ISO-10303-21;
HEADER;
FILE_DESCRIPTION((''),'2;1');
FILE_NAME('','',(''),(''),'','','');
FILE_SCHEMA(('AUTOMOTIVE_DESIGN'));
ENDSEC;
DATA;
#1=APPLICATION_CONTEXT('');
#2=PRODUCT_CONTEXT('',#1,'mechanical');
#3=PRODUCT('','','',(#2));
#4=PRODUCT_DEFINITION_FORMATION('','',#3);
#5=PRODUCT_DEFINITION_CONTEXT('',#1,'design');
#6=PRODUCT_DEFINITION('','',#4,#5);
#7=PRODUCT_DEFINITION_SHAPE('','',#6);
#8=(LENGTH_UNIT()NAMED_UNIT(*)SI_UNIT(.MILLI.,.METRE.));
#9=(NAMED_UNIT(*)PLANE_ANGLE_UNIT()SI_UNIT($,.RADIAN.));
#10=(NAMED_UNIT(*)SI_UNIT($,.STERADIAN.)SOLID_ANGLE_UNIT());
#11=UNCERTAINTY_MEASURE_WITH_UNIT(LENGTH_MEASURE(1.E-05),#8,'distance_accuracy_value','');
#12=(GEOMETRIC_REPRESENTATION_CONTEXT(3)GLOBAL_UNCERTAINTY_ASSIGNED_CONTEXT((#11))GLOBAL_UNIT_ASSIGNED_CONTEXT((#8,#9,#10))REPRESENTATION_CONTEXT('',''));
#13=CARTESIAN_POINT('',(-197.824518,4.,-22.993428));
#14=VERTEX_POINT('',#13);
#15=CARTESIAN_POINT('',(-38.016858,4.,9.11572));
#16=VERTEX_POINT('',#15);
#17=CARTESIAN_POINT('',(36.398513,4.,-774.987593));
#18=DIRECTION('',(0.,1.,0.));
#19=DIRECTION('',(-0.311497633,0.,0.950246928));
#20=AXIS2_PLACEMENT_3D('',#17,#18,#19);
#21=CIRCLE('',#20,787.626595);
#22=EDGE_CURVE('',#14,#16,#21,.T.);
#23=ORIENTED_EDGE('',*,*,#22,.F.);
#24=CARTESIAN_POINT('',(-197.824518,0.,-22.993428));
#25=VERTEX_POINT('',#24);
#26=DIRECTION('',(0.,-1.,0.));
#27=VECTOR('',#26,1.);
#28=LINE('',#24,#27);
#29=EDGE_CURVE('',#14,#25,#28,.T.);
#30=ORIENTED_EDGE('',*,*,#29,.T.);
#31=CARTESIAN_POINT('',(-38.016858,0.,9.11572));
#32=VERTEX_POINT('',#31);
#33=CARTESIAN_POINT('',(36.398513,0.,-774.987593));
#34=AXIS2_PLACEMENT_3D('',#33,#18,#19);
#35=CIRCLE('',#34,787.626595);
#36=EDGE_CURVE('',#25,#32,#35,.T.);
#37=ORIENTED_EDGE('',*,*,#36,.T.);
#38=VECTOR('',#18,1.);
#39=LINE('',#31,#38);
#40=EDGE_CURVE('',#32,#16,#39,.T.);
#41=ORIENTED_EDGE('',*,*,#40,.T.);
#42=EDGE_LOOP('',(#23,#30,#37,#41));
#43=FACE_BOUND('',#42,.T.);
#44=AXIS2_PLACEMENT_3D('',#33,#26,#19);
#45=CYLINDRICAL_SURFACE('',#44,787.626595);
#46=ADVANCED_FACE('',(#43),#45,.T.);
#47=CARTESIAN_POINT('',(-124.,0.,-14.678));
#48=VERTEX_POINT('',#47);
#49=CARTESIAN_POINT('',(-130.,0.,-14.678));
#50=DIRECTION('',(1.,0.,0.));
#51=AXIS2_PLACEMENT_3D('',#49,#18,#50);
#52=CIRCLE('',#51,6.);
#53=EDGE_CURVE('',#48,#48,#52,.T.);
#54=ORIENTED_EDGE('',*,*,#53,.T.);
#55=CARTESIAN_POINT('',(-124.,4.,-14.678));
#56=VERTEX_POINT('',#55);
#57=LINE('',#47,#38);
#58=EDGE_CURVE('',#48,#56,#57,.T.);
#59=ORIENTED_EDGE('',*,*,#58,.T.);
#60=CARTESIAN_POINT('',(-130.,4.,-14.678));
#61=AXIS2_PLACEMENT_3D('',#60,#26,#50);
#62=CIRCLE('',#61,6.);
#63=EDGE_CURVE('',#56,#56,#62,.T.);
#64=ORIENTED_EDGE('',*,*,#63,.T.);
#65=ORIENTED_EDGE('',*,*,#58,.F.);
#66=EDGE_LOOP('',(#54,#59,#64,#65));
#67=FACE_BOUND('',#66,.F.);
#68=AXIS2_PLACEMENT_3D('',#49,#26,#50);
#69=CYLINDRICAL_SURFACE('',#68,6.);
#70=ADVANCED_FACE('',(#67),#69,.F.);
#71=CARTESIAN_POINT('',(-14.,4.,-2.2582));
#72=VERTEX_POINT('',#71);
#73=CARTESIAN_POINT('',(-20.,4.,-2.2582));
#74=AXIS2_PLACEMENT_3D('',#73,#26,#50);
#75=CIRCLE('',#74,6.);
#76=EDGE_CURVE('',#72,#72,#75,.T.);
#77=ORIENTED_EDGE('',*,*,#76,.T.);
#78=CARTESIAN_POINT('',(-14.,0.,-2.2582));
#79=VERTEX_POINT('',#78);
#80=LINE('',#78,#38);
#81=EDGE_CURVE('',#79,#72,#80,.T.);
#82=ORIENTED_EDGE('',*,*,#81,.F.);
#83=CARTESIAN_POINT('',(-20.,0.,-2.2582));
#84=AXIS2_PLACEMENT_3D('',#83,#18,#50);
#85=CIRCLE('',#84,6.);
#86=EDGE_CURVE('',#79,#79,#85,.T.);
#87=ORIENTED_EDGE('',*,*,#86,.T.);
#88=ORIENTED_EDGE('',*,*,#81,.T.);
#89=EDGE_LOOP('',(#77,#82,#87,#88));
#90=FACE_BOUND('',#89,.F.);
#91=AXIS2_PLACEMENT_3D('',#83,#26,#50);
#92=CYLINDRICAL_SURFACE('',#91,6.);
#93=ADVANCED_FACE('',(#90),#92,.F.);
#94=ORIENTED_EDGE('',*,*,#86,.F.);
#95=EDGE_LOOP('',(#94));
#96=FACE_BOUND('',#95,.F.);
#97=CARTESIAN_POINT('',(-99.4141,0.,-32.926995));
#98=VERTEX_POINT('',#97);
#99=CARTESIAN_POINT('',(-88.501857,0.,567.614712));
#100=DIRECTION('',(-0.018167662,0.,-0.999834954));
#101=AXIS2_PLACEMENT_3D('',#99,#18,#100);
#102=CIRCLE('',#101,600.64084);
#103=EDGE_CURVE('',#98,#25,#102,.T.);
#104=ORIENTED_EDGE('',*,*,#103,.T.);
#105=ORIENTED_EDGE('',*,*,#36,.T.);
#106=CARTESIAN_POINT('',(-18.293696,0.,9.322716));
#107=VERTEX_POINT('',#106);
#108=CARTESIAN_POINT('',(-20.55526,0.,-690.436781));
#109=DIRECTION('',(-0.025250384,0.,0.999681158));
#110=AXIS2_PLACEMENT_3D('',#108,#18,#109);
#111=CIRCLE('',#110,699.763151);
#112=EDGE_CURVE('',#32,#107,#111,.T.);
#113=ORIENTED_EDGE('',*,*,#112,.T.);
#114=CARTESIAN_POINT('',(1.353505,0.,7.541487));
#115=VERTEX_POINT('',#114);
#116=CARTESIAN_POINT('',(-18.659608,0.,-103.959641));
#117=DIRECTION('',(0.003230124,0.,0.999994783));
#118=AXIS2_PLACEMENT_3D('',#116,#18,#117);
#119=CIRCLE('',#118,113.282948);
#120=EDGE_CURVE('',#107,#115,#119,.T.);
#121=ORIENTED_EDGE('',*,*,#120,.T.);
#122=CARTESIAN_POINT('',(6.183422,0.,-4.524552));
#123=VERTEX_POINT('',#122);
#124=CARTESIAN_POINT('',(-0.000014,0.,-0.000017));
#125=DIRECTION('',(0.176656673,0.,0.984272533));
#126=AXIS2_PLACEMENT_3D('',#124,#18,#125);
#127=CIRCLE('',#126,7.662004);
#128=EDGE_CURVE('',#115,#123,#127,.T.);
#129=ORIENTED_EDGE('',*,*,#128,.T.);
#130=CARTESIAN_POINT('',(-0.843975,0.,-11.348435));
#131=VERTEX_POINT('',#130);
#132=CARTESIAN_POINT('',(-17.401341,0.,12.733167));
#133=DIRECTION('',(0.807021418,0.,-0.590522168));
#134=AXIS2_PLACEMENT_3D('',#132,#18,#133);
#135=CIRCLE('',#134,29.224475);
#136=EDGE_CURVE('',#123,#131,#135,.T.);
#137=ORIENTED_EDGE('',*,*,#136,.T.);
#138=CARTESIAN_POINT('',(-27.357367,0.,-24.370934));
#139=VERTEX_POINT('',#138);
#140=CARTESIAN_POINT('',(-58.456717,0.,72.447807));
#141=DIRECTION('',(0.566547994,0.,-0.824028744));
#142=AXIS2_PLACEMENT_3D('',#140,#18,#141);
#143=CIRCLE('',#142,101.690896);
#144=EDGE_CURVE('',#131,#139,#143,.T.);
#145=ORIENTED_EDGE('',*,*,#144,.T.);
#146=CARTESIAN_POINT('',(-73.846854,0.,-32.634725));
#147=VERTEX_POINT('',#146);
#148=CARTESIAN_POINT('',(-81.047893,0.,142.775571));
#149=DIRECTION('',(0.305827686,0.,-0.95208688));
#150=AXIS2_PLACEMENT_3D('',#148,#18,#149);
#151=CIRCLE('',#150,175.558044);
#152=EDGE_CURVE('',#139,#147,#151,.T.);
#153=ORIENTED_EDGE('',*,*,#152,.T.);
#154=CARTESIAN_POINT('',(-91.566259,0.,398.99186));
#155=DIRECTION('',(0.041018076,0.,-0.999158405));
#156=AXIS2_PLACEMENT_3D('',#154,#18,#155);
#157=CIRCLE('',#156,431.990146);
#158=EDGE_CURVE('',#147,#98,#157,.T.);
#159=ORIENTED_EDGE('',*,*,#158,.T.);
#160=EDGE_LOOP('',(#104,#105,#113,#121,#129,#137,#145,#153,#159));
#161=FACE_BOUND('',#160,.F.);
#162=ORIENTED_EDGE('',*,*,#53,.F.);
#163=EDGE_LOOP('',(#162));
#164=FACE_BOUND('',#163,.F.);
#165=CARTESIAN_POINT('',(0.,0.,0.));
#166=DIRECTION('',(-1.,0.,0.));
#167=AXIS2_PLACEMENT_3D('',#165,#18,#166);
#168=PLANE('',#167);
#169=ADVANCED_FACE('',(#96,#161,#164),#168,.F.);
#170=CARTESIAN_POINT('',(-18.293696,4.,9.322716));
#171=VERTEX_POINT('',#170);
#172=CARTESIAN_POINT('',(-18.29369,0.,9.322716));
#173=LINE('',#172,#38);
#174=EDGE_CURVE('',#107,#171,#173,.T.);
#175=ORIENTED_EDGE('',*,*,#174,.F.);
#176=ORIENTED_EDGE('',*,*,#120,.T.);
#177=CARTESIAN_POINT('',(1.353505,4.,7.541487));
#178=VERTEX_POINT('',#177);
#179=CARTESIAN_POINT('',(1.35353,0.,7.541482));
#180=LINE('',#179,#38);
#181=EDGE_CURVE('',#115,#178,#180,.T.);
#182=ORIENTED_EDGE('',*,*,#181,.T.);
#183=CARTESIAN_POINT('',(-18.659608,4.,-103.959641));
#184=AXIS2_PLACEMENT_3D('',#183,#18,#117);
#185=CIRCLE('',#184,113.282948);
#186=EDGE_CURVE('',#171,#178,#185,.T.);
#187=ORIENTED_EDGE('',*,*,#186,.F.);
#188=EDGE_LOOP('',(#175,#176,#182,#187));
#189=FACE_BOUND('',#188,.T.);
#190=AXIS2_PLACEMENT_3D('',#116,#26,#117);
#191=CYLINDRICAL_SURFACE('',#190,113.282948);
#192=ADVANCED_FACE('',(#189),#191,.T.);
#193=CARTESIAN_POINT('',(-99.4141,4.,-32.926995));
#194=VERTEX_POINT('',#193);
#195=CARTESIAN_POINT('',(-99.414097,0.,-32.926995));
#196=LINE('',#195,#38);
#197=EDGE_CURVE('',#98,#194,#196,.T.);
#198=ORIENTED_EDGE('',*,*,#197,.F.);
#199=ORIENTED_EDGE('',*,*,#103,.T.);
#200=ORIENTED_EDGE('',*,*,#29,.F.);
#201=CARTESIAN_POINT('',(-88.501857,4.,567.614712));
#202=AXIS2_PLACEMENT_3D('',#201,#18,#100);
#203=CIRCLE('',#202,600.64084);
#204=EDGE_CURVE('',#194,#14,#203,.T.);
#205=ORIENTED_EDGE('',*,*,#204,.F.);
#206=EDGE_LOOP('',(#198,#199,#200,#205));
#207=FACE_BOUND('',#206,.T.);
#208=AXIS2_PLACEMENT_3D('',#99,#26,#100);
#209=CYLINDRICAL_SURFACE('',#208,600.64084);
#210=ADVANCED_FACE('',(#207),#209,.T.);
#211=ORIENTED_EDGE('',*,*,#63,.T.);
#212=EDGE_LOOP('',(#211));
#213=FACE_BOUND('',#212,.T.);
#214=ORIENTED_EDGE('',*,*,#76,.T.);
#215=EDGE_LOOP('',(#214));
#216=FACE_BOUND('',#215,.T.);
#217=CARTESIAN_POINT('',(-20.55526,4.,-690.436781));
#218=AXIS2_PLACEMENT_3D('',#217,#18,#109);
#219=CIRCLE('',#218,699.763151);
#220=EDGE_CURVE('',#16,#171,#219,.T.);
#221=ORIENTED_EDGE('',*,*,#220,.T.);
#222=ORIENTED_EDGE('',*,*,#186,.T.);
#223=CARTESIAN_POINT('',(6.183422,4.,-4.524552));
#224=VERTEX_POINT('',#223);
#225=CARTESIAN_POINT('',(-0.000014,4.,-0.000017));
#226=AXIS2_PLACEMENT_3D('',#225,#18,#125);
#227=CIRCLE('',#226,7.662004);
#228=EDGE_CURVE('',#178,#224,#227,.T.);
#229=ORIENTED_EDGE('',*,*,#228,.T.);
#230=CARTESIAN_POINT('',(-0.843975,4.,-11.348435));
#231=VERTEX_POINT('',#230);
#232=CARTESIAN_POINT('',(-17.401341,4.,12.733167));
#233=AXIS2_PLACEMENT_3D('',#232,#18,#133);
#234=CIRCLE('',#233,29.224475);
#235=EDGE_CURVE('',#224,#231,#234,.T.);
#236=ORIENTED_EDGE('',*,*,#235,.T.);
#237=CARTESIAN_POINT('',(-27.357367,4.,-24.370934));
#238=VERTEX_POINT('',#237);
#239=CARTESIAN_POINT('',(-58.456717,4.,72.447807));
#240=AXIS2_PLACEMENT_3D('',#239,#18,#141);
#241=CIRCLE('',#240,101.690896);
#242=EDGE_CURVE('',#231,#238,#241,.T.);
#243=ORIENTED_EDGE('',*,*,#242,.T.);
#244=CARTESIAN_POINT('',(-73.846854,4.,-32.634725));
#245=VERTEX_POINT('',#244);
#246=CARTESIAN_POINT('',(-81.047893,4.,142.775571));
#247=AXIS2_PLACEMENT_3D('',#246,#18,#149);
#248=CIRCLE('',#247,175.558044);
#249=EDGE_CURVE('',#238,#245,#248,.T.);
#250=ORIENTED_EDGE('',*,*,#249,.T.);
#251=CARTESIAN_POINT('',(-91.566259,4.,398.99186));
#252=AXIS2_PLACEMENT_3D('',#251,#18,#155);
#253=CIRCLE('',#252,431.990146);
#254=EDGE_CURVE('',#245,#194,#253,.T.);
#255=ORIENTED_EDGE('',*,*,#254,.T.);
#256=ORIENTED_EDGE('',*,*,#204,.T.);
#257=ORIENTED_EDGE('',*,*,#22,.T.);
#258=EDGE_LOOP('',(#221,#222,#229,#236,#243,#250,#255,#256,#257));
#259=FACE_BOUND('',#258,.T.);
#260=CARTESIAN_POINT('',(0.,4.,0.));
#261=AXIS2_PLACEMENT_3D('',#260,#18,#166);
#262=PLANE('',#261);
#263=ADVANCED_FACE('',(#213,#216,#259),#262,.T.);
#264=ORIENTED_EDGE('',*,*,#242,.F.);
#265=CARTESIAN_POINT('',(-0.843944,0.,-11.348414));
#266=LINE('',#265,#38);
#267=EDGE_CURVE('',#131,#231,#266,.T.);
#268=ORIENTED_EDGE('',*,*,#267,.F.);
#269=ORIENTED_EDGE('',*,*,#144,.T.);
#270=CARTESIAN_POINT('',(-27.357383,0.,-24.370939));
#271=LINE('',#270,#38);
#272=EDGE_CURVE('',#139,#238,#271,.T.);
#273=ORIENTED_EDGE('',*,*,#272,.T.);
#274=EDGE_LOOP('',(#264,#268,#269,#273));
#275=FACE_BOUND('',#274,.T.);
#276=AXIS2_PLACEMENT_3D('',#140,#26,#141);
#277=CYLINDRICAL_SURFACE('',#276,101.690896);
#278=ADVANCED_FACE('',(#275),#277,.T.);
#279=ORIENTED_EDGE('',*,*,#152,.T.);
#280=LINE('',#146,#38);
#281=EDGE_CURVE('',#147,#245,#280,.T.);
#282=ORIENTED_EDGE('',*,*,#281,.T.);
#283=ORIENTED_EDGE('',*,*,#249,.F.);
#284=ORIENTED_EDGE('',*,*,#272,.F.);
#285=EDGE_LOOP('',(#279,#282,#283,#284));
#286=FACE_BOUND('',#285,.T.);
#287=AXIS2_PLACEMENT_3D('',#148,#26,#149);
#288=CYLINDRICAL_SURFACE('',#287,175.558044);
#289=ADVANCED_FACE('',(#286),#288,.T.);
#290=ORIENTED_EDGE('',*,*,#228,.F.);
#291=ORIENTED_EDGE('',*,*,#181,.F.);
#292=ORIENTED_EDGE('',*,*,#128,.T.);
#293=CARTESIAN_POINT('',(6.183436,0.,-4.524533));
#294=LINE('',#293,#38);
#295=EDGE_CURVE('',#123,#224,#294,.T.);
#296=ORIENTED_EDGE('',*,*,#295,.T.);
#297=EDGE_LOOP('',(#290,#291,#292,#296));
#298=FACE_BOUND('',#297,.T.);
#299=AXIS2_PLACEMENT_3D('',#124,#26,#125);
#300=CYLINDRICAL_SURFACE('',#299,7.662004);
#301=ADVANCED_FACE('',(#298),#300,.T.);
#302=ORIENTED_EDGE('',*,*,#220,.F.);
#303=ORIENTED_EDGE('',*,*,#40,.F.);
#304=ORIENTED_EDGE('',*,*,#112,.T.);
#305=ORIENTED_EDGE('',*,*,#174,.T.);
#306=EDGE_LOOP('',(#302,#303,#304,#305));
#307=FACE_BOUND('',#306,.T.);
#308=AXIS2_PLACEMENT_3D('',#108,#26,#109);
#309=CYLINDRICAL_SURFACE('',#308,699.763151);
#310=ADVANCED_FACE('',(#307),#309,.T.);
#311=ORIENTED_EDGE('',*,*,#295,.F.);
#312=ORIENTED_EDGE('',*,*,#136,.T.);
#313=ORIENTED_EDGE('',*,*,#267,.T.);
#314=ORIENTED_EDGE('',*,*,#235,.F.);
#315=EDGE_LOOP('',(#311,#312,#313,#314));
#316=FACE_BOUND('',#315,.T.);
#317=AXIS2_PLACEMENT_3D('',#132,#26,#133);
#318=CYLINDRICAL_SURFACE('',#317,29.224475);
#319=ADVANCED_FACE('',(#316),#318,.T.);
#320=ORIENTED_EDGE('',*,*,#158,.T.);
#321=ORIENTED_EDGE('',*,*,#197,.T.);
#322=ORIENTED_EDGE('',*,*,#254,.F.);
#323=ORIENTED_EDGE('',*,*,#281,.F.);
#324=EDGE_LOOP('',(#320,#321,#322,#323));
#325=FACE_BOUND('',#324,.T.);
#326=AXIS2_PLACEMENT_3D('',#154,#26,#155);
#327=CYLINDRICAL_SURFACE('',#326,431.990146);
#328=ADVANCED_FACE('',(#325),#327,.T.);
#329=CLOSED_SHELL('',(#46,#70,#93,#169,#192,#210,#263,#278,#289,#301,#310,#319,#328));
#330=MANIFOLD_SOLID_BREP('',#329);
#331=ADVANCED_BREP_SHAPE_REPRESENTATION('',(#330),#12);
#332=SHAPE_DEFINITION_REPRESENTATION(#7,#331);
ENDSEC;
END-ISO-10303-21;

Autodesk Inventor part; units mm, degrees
ref_plane "YZ Plane" through (0, 0, 0) normal (1, 0, 0) x (0, 1, 0)
ref_plane "XZ Plane" through (0, 0, 0) normal (0, 1, 0) x (-1, 0, 0)
ref_plane "XY Plane" through (0, 0, 0) normal (0, 0, 1) x (1, 0, 0)
sketch "スケッチ1" plane through (0, 0, 0) normal (0, 1, 0) x (-1, 0, 0)
  arc A0 (209.8798, -23.6971) -> (38.3003, 12.1023) centre (-36.3979, -774.9853) ccw projected
  arc A1 (99.4686, -35.9265) -> (209.8798, -23.6971) centre (88.5018, 567.6156) ccw projected
  arc A2 (73.7238, -35.6322) -> (99.4686, -35.9265) centre (91.566, 398.982) ccw projected
  arc A3 (26.4399, -27.2272) -> (73.7238, -35.6322) centre (81.048, 142.776) ccw projected
  arc A4 (-0.8557, -13.8205) -> (26.4399, -27.2272) centre (58.458, 72.45) ccw projected
  arc A5 (-8.6045, -6.2961) -> (-0.8557, -13.8205) centre (17.4, 12.732) ccw projected
  arc A6 (-1.8835, 10.4943) -> (-8.6045, -6.2961) centre (0, 0) ccw projected
  arc A7 (18.284, 12.3227) -> (-1.8835, 10.4943) centre (18.66, -103.968) ccw projected
  arc A8 (38.3003, 12.1023) -> (18.284, 12.3227) centre (20.556, -690.396) ccw projected
extrude "押し出し1" add sketch "スケッチ1" along normal blind 4
sketch "スケッチ2" plane through (0, 0, 0) normal (0, -1, 0) x (1, 0, 0)
  circle A0 centre (-20, -2.2582) radius 6
  circle A1 centre (-130, -14.678) radius 6
  line L0 (0, 0) -> (-209.8798, -23.6971)
  dimension "d3" = 12
  dimension "d4" = 12
  dimension "d5" = 20
  dimension "d6" = 130
extrude "押し出し2" cut sketch "スケッチ2" against normal through all
thicken "厚み1" operation cut thickness 3 both sides no extend neighbours no toward (0.2114907, 0, -0.97738) faces at (-130.8117, 2.6667, -2.245) (-36.0766, 2.6667, 12.1549) (-0.3377, 1.3333, 10.8708) (9.052, 1.3333, -5.6337) (1.8363, 1.3333, -13.1189) (-10.787, 2.6667, -20.7604) (-68.3801, 1.3333, -35.3326) (-85.1636, 2.6667, -35.9512) (-200.7848, 1.3333, -25.4914)
equation "\"d4\" = d3"
properties part number "plate" material "木材 (オーク)"
